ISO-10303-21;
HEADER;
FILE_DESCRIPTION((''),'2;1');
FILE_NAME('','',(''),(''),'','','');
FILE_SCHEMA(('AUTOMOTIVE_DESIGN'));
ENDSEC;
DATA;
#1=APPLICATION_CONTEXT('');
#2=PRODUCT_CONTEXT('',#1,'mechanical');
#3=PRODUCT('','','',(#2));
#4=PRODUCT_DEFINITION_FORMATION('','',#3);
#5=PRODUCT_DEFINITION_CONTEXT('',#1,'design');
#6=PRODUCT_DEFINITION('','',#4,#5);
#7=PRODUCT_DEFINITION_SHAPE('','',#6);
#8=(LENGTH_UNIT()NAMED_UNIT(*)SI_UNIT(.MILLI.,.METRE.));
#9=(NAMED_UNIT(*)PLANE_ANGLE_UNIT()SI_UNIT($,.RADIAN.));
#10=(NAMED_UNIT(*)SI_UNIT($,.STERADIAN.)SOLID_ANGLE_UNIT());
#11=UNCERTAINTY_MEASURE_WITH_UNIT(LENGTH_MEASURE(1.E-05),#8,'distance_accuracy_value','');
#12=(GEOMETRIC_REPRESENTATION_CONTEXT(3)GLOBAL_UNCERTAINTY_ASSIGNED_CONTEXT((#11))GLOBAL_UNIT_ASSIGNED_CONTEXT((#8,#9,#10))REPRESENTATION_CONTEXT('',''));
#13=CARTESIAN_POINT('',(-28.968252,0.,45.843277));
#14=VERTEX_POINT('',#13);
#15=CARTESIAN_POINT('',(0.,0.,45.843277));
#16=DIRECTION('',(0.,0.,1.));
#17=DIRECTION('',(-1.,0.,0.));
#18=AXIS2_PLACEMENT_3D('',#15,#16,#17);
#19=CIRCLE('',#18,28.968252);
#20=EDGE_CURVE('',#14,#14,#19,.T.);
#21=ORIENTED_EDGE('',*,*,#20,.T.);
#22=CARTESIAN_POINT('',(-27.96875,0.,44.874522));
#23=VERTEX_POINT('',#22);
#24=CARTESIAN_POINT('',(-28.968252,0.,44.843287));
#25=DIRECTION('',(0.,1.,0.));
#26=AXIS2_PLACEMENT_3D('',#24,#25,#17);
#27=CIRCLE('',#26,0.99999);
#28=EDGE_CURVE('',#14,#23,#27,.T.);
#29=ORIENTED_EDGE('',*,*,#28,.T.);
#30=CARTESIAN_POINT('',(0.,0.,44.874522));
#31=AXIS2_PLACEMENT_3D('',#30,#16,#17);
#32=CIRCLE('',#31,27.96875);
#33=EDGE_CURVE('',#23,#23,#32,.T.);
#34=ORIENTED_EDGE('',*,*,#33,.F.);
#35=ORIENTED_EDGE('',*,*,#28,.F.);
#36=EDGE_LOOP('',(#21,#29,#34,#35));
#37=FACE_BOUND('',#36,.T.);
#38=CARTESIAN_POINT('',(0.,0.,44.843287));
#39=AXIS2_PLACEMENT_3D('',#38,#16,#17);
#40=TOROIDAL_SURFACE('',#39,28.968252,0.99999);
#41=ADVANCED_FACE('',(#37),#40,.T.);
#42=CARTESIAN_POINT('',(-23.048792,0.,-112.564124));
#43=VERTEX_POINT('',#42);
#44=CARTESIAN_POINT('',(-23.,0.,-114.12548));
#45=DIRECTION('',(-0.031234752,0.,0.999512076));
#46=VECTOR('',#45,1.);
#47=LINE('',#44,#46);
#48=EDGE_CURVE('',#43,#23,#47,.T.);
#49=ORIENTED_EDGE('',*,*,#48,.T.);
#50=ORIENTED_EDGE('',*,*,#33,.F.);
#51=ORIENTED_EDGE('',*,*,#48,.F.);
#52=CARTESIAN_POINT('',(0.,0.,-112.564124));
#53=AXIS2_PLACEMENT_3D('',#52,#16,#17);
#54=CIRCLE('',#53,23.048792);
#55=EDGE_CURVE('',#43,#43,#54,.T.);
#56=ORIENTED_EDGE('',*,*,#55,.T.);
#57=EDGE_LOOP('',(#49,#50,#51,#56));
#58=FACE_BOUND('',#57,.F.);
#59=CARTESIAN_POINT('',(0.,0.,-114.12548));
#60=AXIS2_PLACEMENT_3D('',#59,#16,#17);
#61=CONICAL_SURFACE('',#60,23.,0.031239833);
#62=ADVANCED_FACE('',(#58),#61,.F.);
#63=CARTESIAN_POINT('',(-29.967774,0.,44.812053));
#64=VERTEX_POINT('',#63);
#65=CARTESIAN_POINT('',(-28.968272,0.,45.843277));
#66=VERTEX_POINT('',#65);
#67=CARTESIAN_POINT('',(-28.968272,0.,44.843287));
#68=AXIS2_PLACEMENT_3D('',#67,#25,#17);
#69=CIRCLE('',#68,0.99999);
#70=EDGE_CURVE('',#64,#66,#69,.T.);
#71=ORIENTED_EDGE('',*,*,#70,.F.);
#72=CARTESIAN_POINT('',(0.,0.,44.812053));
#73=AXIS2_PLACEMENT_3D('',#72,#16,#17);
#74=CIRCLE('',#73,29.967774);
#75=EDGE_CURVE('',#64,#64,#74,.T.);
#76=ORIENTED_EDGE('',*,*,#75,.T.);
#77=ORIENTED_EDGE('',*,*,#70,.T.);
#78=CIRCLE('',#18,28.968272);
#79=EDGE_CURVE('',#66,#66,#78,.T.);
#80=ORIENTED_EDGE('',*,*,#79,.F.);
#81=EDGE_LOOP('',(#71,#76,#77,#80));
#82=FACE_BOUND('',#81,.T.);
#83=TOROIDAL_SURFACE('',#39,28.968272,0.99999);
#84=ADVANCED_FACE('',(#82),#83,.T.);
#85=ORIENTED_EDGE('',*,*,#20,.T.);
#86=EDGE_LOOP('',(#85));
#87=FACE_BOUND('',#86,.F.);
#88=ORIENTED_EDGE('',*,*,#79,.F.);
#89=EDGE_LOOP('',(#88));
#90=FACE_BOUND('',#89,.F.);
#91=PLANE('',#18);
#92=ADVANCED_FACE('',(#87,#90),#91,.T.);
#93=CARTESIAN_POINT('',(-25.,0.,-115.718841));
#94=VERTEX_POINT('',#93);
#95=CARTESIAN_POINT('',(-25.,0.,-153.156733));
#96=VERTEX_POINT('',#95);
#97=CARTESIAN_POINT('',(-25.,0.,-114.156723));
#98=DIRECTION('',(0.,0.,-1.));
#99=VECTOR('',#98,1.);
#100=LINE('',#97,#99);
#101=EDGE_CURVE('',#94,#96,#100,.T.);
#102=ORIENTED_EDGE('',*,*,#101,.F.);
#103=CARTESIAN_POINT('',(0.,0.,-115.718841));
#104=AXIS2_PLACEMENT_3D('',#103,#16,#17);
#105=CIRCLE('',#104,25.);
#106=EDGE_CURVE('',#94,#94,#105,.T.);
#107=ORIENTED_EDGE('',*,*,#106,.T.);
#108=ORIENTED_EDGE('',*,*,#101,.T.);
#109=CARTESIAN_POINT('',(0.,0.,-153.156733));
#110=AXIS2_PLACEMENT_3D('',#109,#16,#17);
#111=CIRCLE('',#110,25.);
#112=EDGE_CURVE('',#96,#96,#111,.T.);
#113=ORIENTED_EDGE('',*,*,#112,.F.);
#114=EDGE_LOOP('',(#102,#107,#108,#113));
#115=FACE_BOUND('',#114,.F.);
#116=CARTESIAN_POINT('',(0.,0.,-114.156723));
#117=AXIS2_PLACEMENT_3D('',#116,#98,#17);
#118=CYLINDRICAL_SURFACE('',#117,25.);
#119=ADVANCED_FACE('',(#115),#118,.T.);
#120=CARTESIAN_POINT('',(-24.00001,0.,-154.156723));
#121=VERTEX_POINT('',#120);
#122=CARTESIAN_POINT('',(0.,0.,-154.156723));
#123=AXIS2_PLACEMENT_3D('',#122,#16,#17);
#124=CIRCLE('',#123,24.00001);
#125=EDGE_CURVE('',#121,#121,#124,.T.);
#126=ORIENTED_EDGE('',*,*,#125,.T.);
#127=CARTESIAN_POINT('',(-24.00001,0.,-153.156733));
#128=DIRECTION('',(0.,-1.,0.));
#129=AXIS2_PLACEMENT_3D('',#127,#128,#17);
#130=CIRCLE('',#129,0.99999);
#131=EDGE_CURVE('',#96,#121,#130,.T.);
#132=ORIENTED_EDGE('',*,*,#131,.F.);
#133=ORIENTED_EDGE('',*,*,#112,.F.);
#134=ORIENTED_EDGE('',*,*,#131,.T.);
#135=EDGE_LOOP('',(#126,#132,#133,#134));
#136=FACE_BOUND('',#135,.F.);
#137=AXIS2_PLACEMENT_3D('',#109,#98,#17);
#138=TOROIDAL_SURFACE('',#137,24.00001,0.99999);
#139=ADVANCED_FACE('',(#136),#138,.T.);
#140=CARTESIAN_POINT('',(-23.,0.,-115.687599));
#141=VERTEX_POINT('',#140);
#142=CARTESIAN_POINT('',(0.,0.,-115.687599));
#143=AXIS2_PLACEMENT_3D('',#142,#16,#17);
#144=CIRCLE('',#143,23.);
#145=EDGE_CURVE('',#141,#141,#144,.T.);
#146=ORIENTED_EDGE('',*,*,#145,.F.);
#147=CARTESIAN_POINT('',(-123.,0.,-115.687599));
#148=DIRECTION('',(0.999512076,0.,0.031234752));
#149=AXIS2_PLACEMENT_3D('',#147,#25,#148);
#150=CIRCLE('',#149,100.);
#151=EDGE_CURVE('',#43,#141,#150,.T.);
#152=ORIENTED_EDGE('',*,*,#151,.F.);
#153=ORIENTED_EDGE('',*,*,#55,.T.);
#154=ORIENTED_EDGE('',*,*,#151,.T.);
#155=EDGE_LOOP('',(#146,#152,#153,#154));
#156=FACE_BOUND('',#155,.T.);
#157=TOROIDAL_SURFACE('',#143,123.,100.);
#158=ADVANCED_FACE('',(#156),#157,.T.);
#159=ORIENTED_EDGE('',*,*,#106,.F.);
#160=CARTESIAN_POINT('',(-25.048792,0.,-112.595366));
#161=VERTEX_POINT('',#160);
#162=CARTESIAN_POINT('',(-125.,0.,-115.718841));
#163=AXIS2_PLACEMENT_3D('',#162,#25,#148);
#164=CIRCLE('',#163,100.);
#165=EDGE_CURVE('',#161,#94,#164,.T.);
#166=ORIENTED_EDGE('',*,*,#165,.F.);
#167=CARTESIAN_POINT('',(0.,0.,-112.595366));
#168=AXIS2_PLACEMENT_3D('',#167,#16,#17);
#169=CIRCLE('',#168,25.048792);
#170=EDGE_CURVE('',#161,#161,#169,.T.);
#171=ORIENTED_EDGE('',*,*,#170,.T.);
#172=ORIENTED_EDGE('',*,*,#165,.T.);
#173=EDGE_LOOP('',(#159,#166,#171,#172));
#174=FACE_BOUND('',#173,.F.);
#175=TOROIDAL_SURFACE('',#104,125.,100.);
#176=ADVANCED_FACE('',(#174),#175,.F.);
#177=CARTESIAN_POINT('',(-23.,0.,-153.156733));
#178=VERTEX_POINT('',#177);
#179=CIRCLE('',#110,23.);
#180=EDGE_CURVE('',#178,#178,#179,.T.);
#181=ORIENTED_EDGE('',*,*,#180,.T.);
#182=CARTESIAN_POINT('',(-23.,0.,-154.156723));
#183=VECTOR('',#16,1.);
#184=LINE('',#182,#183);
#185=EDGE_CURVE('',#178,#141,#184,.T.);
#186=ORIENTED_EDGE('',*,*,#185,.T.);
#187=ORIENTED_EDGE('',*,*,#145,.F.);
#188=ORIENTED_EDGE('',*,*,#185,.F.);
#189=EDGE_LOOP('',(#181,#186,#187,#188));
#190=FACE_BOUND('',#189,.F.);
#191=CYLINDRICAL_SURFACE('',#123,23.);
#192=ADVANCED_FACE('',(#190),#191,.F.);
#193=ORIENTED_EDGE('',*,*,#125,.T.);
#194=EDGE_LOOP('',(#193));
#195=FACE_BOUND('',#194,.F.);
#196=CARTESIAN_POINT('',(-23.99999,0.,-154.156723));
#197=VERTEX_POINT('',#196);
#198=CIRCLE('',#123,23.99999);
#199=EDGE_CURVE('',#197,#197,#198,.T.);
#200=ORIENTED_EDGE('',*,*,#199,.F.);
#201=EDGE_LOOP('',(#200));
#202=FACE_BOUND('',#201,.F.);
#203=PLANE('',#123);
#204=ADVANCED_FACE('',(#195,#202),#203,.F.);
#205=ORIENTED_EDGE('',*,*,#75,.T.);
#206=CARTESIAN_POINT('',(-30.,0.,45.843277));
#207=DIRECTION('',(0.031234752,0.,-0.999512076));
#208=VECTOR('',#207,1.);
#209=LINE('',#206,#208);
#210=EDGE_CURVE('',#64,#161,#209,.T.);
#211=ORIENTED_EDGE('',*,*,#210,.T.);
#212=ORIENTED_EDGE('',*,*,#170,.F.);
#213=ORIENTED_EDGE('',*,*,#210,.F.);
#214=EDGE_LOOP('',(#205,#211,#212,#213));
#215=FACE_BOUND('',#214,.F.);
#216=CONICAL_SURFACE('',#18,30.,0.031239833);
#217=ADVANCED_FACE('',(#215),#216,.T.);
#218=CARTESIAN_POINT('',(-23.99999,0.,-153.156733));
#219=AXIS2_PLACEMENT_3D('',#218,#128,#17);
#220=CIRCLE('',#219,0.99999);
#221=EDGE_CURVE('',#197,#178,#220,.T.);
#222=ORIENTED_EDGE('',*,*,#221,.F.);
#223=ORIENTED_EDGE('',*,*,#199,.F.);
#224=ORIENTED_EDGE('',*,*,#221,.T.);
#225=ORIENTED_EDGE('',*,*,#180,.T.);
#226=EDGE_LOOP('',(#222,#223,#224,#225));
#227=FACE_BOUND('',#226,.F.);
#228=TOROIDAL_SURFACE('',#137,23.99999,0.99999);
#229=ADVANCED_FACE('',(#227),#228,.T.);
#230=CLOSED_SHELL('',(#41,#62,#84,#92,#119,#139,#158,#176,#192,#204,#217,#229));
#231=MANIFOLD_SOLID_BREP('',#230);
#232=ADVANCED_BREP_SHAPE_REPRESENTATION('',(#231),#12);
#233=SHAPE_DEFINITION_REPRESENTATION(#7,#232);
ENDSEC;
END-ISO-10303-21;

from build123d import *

# Parameters (mm, degrees)
F3_R = 0.99999


# Not quite as in the source:
# - a fillet or chamfer that OpenCascade refuses, or shapes differently, is made with other operations: its cross-section is extruded or revolved along the edge and cut away or added
# - a fillet or chamfer is up to 0.001 mm smaller than in the source, because OpenCascade refuses the exact size


with BuildPart() as f1:
    # F0 (on Front) → F1 (revolve)
    with BuildSketch(Plane.XZ):
        Polygon((-23, -114.1254802332), (-27.9990236758, 45.8432773924), (-30, 45.8432773924), (-25, -114.1567226076), (-25, -154.1567226076), (-23, -154.1567226076), align=None)
    revolve(axis=Axis((0, 0, -54.1567226076), (0, 0, 1)))

    # F2: fillet of radius 100 on 2 edges, made by hand

    # F2_s1 → F2_t2 (revolve)
    with BuildSketch(Plane.XZ):
        with BuildLine():
            ThreePointArc((-25.0487923913, -112.5953660862), (-25.0121988419, -114.1569131679), (-25, -115.718841324))
            Line((-25, -115.718841324), (-25, -114.1567226076))
            Line((-25, -114.1567226076), (-25.0487923913, -112.5953660862))
        make_face()
    revolve(axis=Axis((0, 0, -114.1567226076), (0, 0, 1)))

    # F2_s3 → F2_t4 (revolve, cut)
    with BuildSketch(Plane.XZ):
        with BuildLine():
            ThreePointArc((-23.0487923913, -112.5641237119), (-23.0121988419, -114.1256707936), (-23, -115.6875989497))
            Line((-23, -115.6875989497), (-23, -114.1254802332))
            Line((-23, -114.1254802332), (-23.0487923913, -112.5641237119))
        make_face()
    revolve(axis=Axis((0, 0, -114.1254802332), (0, 0, 1)), mode=Mode.SUBTRACT)

    # F3 (radius 1 in the source; OpenCascade refuses exactly that, so slightly less here)
    f3_edges = [f1.edges().sort_by_distance(p)[0] for p in [
        (27.999024, 0, 45.843277),
        (30, 0, 45.843277),
        (25, 0, -154.156723),
        (23, 0, -154.156723),
    ]]
    fillet(f3_edges, radius=F3_R)


solid = f1.part
